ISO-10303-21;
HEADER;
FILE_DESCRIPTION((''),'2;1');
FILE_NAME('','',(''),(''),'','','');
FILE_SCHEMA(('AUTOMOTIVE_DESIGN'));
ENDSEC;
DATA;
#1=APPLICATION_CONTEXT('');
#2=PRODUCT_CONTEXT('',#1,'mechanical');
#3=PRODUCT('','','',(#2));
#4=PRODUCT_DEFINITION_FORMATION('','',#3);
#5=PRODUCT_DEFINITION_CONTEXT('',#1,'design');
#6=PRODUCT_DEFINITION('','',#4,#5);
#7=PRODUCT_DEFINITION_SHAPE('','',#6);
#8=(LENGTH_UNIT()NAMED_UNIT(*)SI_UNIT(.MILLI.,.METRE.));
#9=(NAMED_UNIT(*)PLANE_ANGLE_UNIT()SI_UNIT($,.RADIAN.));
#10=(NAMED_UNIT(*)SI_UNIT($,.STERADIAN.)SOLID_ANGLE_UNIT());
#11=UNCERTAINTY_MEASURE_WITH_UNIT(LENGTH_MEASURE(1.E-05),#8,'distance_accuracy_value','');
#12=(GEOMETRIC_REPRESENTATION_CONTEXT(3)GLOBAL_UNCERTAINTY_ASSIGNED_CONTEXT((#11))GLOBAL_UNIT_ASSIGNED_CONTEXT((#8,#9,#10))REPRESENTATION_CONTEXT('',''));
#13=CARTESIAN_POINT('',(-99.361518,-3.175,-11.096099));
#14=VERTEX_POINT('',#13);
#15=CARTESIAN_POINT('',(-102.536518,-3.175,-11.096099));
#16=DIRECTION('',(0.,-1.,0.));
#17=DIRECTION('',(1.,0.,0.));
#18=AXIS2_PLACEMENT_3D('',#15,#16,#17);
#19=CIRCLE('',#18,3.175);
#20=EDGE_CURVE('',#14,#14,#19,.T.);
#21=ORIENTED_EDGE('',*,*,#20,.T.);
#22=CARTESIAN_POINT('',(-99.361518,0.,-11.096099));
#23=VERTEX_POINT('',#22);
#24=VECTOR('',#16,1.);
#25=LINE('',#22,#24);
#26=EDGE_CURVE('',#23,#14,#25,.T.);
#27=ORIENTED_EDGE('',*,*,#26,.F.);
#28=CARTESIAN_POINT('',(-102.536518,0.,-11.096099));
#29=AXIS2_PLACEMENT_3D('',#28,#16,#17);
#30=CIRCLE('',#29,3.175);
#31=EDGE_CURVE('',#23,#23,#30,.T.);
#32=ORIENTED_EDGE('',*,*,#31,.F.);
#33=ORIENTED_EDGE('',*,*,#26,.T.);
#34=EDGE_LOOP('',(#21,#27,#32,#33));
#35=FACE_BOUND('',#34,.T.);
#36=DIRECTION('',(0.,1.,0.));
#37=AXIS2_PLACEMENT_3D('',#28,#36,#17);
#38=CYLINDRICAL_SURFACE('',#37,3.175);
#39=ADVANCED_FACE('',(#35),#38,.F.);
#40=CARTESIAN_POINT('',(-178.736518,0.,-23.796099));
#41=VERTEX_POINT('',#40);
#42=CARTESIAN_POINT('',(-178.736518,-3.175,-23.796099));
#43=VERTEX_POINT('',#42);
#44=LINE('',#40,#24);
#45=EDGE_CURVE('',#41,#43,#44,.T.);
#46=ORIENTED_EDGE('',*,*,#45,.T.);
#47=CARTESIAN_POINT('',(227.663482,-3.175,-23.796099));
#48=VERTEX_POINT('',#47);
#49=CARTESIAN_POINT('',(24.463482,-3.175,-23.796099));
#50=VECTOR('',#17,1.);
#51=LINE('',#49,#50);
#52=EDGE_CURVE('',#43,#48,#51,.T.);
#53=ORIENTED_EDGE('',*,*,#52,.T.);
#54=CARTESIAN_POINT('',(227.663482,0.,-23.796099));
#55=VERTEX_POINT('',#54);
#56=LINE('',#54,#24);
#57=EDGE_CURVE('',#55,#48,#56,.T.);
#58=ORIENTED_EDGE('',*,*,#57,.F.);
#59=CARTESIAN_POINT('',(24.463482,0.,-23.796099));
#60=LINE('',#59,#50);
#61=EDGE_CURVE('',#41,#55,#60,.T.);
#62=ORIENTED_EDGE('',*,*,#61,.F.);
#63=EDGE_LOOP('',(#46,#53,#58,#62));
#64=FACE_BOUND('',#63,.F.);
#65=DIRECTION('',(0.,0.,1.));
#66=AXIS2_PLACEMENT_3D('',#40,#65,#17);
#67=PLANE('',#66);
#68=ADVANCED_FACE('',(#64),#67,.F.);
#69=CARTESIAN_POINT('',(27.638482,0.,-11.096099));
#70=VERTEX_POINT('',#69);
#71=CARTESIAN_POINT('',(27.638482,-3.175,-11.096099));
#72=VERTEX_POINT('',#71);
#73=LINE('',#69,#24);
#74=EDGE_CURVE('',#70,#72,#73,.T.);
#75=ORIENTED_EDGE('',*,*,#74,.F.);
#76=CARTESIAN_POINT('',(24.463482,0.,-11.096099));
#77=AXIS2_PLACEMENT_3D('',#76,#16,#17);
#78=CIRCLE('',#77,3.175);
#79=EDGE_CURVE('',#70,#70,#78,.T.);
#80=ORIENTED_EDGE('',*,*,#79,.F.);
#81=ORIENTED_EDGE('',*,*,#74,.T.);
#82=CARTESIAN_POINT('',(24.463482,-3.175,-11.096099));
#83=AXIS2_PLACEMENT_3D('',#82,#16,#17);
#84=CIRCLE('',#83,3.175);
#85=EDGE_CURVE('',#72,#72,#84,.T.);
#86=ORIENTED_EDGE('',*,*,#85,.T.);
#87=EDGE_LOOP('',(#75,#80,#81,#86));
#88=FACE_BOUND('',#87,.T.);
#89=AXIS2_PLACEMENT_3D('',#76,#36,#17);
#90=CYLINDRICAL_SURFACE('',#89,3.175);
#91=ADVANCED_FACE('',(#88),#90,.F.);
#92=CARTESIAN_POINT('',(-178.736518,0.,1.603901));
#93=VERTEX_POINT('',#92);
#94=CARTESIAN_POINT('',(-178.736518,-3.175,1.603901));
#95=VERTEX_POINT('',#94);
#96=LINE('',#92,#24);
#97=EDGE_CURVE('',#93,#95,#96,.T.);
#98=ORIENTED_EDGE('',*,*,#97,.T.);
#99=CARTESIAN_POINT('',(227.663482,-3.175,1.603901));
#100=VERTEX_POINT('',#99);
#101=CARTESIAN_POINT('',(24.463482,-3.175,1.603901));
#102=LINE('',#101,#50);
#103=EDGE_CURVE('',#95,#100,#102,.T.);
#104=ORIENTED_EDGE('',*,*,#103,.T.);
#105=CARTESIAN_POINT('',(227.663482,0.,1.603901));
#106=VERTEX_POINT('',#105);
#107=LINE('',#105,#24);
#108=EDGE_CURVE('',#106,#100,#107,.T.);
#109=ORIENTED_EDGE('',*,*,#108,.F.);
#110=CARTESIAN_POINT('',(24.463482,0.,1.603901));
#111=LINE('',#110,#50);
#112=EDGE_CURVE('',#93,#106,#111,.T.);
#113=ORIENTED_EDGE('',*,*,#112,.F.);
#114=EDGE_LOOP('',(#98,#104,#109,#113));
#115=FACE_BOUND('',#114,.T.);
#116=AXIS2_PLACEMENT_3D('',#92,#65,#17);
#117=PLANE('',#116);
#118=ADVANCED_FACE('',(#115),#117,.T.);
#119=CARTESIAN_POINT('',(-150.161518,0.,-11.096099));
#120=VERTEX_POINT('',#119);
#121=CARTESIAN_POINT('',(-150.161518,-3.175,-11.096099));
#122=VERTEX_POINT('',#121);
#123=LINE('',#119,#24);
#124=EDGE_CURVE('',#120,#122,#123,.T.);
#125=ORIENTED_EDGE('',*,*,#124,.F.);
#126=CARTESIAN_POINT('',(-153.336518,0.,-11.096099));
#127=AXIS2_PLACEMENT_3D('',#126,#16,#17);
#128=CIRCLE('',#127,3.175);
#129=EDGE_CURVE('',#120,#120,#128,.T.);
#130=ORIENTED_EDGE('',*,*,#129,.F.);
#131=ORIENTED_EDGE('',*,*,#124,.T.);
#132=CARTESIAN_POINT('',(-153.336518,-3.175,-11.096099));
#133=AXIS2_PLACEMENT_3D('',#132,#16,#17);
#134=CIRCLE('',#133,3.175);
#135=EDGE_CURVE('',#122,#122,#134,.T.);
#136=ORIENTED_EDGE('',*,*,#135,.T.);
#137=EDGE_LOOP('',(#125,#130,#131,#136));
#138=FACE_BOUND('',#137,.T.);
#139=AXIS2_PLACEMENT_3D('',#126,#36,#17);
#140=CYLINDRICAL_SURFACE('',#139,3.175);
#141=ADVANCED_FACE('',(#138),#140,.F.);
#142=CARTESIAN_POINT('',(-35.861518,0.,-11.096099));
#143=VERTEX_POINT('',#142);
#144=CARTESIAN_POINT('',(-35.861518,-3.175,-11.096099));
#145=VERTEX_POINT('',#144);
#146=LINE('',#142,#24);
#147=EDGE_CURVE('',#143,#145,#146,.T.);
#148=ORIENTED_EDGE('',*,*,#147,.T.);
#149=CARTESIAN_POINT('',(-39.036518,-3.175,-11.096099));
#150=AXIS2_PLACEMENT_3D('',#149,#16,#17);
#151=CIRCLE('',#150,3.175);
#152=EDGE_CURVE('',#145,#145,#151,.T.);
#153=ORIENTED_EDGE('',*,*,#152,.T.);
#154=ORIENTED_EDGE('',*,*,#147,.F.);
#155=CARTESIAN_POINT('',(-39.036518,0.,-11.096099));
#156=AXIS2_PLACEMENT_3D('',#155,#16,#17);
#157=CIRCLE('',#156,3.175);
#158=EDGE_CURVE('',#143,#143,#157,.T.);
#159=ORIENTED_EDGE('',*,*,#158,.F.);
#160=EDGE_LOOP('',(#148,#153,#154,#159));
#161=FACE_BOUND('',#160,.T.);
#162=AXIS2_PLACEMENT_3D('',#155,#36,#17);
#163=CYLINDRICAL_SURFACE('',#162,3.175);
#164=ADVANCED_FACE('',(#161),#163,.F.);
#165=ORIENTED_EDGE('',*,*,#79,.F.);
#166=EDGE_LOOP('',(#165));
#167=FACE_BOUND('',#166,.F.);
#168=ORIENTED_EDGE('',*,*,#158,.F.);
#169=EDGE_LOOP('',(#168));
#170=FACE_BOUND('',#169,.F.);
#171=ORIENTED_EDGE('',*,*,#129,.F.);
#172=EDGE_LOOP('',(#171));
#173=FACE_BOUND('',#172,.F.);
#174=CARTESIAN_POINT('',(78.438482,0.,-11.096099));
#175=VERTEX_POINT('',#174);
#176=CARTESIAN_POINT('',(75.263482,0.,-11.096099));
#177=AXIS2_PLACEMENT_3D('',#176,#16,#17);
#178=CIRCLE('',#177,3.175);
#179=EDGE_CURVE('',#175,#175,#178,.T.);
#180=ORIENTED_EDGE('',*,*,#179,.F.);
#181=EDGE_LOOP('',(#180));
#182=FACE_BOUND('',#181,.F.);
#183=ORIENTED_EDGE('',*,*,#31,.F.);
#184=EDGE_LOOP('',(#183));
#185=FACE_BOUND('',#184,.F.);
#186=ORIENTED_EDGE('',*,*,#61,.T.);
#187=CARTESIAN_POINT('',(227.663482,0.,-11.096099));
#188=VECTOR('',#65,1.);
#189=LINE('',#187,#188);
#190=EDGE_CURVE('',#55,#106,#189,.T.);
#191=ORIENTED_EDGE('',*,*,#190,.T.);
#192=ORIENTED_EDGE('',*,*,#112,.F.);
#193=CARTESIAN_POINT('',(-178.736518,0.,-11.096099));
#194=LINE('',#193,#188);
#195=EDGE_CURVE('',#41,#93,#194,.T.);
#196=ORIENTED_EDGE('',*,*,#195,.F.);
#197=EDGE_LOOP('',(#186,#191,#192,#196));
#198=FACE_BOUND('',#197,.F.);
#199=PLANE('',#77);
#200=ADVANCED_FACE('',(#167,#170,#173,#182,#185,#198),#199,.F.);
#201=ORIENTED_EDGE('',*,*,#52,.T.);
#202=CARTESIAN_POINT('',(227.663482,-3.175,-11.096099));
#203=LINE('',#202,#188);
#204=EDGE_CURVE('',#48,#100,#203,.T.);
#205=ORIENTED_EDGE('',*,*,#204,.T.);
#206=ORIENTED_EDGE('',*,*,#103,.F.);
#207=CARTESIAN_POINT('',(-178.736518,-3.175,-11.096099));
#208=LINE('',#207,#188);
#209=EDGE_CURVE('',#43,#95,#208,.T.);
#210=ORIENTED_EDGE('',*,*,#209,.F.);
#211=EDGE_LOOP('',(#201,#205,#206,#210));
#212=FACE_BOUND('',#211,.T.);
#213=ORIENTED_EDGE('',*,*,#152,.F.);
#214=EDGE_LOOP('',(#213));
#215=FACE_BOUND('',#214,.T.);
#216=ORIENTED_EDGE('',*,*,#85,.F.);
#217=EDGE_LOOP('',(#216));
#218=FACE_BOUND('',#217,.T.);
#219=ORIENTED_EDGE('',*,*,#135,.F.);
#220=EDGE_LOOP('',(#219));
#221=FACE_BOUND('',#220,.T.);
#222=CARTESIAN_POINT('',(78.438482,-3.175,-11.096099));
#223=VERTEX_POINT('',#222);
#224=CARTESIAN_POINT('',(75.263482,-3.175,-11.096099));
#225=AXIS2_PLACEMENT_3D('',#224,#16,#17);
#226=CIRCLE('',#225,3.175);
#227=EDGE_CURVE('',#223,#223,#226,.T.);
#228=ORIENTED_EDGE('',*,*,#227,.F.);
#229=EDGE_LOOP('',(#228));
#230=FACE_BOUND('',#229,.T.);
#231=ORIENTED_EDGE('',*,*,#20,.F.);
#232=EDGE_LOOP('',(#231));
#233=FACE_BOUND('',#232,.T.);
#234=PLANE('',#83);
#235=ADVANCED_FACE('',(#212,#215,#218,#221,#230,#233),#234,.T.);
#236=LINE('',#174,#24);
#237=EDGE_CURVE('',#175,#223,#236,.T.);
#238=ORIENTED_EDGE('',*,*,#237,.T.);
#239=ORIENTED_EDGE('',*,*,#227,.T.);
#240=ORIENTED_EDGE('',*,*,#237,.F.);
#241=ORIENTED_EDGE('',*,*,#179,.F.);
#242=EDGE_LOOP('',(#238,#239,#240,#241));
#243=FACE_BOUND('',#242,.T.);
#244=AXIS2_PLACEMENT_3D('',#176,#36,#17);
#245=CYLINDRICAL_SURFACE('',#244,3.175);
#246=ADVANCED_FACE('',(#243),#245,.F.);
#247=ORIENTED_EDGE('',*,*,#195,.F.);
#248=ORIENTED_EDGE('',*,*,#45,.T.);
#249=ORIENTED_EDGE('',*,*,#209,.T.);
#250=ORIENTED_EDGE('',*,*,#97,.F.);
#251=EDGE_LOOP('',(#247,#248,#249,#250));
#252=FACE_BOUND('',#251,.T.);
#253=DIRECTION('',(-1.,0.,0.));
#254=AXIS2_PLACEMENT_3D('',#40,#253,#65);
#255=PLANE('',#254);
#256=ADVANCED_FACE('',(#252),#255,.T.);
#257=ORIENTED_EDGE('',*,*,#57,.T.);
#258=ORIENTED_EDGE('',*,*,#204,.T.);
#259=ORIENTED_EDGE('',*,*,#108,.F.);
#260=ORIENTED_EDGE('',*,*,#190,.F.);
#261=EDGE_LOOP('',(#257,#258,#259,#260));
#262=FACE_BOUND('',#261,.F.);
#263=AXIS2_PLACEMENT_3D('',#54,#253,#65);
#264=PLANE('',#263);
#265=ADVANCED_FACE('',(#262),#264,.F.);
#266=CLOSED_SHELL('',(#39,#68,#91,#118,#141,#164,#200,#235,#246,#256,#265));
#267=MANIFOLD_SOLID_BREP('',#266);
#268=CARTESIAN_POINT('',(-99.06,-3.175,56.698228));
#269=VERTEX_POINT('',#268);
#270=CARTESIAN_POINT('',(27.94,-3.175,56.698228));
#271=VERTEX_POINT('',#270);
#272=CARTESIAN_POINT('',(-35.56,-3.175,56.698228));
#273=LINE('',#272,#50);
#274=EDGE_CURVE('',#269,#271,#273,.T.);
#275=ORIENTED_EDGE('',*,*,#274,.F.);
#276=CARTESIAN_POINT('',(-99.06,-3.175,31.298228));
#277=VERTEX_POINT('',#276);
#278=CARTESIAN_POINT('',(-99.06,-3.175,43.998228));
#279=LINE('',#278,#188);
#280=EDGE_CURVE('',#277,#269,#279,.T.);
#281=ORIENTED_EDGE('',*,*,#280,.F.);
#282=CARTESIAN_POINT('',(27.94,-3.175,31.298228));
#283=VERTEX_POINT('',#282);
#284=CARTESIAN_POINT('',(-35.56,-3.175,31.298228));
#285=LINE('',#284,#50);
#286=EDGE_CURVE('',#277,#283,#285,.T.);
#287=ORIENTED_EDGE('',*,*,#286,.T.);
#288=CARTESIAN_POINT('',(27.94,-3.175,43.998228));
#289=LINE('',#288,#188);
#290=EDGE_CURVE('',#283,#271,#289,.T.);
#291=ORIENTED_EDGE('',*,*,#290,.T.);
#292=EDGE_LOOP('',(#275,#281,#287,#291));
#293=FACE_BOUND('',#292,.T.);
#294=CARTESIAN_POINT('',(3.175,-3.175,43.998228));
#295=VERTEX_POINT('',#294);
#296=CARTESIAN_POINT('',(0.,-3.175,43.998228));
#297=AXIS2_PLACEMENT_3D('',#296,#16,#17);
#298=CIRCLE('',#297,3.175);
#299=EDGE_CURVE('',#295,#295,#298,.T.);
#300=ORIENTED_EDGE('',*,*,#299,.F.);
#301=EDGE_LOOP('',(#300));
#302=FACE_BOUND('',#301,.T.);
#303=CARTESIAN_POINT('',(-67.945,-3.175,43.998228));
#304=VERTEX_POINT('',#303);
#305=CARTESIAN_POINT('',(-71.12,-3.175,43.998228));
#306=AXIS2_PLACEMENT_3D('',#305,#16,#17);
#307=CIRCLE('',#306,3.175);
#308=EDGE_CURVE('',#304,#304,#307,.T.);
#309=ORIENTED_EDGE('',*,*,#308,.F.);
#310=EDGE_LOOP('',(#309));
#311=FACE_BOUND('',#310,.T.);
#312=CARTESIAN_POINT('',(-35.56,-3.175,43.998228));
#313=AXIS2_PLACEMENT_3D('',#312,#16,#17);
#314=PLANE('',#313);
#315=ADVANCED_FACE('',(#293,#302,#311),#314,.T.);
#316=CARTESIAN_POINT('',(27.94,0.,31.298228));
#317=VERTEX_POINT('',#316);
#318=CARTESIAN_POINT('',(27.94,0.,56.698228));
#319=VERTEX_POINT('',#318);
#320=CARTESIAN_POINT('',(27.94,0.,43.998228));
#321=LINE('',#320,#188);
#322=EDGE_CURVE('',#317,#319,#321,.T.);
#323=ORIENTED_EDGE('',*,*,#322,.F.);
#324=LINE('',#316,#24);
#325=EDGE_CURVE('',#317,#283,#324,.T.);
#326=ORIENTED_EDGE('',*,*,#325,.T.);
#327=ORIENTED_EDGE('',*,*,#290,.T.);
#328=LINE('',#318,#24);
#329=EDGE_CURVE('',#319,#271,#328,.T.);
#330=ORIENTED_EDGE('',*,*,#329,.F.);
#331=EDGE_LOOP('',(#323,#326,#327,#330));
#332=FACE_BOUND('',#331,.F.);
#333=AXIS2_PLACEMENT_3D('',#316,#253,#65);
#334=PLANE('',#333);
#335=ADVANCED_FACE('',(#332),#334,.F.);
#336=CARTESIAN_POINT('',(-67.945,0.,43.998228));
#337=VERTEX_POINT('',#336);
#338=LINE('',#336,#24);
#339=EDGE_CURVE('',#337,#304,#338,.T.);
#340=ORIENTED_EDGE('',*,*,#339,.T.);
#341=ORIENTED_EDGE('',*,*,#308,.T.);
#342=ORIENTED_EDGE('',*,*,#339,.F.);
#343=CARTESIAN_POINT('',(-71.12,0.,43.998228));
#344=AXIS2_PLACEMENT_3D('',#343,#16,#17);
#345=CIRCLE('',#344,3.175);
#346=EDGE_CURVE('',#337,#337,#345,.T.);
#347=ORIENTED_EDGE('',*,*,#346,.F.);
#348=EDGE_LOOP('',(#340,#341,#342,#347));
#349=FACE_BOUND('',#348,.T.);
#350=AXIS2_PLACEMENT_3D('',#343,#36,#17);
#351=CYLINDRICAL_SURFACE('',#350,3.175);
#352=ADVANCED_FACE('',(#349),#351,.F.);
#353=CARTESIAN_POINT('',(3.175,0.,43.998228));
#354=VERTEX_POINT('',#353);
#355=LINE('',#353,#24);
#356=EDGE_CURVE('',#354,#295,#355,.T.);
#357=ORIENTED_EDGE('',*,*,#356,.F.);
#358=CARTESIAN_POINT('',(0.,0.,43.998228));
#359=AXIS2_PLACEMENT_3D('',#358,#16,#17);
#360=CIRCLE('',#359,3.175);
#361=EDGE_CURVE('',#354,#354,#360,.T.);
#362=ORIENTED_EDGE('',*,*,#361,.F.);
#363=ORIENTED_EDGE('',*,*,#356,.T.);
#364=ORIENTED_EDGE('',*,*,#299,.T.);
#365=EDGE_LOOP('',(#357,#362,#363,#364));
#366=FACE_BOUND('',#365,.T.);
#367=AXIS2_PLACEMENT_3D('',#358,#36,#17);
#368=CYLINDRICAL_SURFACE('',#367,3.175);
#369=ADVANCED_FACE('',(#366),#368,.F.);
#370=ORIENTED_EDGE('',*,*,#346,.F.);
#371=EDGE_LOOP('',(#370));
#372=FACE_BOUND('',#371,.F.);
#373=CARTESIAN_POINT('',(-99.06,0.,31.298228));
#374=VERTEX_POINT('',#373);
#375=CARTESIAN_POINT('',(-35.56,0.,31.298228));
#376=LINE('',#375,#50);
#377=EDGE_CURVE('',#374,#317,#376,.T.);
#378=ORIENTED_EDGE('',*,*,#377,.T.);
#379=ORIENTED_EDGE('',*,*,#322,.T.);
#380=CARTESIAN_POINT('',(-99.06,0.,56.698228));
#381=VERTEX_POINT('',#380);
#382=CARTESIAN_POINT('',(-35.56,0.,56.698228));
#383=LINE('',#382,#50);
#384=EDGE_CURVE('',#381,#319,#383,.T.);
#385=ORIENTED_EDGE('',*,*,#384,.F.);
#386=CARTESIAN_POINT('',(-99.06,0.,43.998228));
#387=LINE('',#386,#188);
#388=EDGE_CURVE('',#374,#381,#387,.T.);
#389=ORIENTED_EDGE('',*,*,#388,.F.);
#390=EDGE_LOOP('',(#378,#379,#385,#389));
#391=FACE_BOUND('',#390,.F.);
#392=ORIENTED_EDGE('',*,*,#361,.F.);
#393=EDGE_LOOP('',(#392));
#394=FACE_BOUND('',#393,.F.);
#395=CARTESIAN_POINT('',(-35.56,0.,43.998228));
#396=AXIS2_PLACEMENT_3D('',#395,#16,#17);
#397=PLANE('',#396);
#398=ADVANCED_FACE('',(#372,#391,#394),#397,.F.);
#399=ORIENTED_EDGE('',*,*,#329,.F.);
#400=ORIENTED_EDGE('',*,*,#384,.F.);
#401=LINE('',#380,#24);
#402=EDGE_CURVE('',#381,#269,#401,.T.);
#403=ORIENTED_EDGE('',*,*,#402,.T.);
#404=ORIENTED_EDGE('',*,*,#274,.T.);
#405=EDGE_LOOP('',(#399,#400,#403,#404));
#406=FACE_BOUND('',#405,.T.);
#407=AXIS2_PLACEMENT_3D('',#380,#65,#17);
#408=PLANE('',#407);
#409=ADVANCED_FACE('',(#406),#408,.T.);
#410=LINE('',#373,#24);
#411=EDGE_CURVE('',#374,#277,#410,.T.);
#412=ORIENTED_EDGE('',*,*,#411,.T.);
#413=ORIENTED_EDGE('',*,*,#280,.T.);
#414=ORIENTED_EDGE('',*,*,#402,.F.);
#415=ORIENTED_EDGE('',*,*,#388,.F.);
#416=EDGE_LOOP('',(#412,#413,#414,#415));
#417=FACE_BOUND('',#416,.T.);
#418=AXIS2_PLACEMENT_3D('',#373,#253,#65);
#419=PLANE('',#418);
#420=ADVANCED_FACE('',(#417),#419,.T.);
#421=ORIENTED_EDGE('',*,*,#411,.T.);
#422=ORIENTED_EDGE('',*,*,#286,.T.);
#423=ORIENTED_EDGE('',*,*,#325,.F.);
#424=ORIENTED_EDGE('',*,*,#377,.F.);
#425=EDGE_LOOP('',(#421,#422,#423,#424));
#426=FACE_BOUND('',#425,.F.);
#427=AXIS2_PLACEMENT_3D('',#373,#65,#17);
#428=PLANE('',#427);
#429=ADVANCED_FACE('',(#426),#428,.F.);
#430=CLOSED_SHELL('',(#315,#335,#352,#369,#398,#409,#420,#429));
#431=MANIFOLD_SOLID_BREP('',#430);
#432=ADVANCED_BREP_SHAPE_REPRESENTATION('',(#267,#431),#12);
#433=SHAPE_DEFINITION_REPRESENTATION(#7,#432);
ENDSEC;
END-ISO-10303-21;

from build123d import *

# Parameters (mm, degrees)
F0_W     = 406.4
F0_H     = 25.4
F0_R     = 3.175
F1_DEPTH = 3.175
F2_W     = 127
F2_H     = 25.4
F2_R     = 3.175
F3_DEPTH = 3.175


# Not quite as in the source:
# - a length typed as a fraction of an inch, garbled in the dataset ("3 / 203.2 mm" for 3/8 in), is restored


with BuildPart() as f1:
    # F0 (on Front) → F1 (new body)
    with BuildSketch(Plane.XZ):
        with Locations((24.4634822011, -11.0960994189)):
            Rectangle(F0_W, F0_H)
        with Locations((-153.3365177989, -11.0960994189)):
            Circle(F0_R, mode=Mode.SUBTRACT)
        with Locations((-102.5365177989, -11.0960994189)):
            Circle(F0_R, mode=Mode.SUBTRACT)
        with Locations((-39.0365177989, -11.0960994189)):
            Circle(F0_R, mode=Mode.SUBTRACT)
        with Locations((24.4634822011, -11.0960994189)):
            Circle(F0_R, mode=Mode.SUBTRACT)
        with Locations((75.2634822011, -11.0960994189)):
            Circle(F0_R, mode=Mode.SUBTRACT)
    extrude(amount=F1_DEPTH)


with BuildPart() as f3:
    # F2 (on Front) → F3 (new body)
    with BuildSketch(Plane.XZ):
        with Locations((-35.56, 43.9982284964)):
            Rectangle(F2_W, F2_H)
        with Locations((-71.12, 43.9982284964)):
            Circle(F2_R, mode=Mode.SUBTRACT)
        with Locations((0, 43.9982284964)):
            Circle(F2_R, mode=Mode.SUBTRACT)
    extrude(amount=F3_DEPTH)


solid = Compound([f1.part, f3.part])
